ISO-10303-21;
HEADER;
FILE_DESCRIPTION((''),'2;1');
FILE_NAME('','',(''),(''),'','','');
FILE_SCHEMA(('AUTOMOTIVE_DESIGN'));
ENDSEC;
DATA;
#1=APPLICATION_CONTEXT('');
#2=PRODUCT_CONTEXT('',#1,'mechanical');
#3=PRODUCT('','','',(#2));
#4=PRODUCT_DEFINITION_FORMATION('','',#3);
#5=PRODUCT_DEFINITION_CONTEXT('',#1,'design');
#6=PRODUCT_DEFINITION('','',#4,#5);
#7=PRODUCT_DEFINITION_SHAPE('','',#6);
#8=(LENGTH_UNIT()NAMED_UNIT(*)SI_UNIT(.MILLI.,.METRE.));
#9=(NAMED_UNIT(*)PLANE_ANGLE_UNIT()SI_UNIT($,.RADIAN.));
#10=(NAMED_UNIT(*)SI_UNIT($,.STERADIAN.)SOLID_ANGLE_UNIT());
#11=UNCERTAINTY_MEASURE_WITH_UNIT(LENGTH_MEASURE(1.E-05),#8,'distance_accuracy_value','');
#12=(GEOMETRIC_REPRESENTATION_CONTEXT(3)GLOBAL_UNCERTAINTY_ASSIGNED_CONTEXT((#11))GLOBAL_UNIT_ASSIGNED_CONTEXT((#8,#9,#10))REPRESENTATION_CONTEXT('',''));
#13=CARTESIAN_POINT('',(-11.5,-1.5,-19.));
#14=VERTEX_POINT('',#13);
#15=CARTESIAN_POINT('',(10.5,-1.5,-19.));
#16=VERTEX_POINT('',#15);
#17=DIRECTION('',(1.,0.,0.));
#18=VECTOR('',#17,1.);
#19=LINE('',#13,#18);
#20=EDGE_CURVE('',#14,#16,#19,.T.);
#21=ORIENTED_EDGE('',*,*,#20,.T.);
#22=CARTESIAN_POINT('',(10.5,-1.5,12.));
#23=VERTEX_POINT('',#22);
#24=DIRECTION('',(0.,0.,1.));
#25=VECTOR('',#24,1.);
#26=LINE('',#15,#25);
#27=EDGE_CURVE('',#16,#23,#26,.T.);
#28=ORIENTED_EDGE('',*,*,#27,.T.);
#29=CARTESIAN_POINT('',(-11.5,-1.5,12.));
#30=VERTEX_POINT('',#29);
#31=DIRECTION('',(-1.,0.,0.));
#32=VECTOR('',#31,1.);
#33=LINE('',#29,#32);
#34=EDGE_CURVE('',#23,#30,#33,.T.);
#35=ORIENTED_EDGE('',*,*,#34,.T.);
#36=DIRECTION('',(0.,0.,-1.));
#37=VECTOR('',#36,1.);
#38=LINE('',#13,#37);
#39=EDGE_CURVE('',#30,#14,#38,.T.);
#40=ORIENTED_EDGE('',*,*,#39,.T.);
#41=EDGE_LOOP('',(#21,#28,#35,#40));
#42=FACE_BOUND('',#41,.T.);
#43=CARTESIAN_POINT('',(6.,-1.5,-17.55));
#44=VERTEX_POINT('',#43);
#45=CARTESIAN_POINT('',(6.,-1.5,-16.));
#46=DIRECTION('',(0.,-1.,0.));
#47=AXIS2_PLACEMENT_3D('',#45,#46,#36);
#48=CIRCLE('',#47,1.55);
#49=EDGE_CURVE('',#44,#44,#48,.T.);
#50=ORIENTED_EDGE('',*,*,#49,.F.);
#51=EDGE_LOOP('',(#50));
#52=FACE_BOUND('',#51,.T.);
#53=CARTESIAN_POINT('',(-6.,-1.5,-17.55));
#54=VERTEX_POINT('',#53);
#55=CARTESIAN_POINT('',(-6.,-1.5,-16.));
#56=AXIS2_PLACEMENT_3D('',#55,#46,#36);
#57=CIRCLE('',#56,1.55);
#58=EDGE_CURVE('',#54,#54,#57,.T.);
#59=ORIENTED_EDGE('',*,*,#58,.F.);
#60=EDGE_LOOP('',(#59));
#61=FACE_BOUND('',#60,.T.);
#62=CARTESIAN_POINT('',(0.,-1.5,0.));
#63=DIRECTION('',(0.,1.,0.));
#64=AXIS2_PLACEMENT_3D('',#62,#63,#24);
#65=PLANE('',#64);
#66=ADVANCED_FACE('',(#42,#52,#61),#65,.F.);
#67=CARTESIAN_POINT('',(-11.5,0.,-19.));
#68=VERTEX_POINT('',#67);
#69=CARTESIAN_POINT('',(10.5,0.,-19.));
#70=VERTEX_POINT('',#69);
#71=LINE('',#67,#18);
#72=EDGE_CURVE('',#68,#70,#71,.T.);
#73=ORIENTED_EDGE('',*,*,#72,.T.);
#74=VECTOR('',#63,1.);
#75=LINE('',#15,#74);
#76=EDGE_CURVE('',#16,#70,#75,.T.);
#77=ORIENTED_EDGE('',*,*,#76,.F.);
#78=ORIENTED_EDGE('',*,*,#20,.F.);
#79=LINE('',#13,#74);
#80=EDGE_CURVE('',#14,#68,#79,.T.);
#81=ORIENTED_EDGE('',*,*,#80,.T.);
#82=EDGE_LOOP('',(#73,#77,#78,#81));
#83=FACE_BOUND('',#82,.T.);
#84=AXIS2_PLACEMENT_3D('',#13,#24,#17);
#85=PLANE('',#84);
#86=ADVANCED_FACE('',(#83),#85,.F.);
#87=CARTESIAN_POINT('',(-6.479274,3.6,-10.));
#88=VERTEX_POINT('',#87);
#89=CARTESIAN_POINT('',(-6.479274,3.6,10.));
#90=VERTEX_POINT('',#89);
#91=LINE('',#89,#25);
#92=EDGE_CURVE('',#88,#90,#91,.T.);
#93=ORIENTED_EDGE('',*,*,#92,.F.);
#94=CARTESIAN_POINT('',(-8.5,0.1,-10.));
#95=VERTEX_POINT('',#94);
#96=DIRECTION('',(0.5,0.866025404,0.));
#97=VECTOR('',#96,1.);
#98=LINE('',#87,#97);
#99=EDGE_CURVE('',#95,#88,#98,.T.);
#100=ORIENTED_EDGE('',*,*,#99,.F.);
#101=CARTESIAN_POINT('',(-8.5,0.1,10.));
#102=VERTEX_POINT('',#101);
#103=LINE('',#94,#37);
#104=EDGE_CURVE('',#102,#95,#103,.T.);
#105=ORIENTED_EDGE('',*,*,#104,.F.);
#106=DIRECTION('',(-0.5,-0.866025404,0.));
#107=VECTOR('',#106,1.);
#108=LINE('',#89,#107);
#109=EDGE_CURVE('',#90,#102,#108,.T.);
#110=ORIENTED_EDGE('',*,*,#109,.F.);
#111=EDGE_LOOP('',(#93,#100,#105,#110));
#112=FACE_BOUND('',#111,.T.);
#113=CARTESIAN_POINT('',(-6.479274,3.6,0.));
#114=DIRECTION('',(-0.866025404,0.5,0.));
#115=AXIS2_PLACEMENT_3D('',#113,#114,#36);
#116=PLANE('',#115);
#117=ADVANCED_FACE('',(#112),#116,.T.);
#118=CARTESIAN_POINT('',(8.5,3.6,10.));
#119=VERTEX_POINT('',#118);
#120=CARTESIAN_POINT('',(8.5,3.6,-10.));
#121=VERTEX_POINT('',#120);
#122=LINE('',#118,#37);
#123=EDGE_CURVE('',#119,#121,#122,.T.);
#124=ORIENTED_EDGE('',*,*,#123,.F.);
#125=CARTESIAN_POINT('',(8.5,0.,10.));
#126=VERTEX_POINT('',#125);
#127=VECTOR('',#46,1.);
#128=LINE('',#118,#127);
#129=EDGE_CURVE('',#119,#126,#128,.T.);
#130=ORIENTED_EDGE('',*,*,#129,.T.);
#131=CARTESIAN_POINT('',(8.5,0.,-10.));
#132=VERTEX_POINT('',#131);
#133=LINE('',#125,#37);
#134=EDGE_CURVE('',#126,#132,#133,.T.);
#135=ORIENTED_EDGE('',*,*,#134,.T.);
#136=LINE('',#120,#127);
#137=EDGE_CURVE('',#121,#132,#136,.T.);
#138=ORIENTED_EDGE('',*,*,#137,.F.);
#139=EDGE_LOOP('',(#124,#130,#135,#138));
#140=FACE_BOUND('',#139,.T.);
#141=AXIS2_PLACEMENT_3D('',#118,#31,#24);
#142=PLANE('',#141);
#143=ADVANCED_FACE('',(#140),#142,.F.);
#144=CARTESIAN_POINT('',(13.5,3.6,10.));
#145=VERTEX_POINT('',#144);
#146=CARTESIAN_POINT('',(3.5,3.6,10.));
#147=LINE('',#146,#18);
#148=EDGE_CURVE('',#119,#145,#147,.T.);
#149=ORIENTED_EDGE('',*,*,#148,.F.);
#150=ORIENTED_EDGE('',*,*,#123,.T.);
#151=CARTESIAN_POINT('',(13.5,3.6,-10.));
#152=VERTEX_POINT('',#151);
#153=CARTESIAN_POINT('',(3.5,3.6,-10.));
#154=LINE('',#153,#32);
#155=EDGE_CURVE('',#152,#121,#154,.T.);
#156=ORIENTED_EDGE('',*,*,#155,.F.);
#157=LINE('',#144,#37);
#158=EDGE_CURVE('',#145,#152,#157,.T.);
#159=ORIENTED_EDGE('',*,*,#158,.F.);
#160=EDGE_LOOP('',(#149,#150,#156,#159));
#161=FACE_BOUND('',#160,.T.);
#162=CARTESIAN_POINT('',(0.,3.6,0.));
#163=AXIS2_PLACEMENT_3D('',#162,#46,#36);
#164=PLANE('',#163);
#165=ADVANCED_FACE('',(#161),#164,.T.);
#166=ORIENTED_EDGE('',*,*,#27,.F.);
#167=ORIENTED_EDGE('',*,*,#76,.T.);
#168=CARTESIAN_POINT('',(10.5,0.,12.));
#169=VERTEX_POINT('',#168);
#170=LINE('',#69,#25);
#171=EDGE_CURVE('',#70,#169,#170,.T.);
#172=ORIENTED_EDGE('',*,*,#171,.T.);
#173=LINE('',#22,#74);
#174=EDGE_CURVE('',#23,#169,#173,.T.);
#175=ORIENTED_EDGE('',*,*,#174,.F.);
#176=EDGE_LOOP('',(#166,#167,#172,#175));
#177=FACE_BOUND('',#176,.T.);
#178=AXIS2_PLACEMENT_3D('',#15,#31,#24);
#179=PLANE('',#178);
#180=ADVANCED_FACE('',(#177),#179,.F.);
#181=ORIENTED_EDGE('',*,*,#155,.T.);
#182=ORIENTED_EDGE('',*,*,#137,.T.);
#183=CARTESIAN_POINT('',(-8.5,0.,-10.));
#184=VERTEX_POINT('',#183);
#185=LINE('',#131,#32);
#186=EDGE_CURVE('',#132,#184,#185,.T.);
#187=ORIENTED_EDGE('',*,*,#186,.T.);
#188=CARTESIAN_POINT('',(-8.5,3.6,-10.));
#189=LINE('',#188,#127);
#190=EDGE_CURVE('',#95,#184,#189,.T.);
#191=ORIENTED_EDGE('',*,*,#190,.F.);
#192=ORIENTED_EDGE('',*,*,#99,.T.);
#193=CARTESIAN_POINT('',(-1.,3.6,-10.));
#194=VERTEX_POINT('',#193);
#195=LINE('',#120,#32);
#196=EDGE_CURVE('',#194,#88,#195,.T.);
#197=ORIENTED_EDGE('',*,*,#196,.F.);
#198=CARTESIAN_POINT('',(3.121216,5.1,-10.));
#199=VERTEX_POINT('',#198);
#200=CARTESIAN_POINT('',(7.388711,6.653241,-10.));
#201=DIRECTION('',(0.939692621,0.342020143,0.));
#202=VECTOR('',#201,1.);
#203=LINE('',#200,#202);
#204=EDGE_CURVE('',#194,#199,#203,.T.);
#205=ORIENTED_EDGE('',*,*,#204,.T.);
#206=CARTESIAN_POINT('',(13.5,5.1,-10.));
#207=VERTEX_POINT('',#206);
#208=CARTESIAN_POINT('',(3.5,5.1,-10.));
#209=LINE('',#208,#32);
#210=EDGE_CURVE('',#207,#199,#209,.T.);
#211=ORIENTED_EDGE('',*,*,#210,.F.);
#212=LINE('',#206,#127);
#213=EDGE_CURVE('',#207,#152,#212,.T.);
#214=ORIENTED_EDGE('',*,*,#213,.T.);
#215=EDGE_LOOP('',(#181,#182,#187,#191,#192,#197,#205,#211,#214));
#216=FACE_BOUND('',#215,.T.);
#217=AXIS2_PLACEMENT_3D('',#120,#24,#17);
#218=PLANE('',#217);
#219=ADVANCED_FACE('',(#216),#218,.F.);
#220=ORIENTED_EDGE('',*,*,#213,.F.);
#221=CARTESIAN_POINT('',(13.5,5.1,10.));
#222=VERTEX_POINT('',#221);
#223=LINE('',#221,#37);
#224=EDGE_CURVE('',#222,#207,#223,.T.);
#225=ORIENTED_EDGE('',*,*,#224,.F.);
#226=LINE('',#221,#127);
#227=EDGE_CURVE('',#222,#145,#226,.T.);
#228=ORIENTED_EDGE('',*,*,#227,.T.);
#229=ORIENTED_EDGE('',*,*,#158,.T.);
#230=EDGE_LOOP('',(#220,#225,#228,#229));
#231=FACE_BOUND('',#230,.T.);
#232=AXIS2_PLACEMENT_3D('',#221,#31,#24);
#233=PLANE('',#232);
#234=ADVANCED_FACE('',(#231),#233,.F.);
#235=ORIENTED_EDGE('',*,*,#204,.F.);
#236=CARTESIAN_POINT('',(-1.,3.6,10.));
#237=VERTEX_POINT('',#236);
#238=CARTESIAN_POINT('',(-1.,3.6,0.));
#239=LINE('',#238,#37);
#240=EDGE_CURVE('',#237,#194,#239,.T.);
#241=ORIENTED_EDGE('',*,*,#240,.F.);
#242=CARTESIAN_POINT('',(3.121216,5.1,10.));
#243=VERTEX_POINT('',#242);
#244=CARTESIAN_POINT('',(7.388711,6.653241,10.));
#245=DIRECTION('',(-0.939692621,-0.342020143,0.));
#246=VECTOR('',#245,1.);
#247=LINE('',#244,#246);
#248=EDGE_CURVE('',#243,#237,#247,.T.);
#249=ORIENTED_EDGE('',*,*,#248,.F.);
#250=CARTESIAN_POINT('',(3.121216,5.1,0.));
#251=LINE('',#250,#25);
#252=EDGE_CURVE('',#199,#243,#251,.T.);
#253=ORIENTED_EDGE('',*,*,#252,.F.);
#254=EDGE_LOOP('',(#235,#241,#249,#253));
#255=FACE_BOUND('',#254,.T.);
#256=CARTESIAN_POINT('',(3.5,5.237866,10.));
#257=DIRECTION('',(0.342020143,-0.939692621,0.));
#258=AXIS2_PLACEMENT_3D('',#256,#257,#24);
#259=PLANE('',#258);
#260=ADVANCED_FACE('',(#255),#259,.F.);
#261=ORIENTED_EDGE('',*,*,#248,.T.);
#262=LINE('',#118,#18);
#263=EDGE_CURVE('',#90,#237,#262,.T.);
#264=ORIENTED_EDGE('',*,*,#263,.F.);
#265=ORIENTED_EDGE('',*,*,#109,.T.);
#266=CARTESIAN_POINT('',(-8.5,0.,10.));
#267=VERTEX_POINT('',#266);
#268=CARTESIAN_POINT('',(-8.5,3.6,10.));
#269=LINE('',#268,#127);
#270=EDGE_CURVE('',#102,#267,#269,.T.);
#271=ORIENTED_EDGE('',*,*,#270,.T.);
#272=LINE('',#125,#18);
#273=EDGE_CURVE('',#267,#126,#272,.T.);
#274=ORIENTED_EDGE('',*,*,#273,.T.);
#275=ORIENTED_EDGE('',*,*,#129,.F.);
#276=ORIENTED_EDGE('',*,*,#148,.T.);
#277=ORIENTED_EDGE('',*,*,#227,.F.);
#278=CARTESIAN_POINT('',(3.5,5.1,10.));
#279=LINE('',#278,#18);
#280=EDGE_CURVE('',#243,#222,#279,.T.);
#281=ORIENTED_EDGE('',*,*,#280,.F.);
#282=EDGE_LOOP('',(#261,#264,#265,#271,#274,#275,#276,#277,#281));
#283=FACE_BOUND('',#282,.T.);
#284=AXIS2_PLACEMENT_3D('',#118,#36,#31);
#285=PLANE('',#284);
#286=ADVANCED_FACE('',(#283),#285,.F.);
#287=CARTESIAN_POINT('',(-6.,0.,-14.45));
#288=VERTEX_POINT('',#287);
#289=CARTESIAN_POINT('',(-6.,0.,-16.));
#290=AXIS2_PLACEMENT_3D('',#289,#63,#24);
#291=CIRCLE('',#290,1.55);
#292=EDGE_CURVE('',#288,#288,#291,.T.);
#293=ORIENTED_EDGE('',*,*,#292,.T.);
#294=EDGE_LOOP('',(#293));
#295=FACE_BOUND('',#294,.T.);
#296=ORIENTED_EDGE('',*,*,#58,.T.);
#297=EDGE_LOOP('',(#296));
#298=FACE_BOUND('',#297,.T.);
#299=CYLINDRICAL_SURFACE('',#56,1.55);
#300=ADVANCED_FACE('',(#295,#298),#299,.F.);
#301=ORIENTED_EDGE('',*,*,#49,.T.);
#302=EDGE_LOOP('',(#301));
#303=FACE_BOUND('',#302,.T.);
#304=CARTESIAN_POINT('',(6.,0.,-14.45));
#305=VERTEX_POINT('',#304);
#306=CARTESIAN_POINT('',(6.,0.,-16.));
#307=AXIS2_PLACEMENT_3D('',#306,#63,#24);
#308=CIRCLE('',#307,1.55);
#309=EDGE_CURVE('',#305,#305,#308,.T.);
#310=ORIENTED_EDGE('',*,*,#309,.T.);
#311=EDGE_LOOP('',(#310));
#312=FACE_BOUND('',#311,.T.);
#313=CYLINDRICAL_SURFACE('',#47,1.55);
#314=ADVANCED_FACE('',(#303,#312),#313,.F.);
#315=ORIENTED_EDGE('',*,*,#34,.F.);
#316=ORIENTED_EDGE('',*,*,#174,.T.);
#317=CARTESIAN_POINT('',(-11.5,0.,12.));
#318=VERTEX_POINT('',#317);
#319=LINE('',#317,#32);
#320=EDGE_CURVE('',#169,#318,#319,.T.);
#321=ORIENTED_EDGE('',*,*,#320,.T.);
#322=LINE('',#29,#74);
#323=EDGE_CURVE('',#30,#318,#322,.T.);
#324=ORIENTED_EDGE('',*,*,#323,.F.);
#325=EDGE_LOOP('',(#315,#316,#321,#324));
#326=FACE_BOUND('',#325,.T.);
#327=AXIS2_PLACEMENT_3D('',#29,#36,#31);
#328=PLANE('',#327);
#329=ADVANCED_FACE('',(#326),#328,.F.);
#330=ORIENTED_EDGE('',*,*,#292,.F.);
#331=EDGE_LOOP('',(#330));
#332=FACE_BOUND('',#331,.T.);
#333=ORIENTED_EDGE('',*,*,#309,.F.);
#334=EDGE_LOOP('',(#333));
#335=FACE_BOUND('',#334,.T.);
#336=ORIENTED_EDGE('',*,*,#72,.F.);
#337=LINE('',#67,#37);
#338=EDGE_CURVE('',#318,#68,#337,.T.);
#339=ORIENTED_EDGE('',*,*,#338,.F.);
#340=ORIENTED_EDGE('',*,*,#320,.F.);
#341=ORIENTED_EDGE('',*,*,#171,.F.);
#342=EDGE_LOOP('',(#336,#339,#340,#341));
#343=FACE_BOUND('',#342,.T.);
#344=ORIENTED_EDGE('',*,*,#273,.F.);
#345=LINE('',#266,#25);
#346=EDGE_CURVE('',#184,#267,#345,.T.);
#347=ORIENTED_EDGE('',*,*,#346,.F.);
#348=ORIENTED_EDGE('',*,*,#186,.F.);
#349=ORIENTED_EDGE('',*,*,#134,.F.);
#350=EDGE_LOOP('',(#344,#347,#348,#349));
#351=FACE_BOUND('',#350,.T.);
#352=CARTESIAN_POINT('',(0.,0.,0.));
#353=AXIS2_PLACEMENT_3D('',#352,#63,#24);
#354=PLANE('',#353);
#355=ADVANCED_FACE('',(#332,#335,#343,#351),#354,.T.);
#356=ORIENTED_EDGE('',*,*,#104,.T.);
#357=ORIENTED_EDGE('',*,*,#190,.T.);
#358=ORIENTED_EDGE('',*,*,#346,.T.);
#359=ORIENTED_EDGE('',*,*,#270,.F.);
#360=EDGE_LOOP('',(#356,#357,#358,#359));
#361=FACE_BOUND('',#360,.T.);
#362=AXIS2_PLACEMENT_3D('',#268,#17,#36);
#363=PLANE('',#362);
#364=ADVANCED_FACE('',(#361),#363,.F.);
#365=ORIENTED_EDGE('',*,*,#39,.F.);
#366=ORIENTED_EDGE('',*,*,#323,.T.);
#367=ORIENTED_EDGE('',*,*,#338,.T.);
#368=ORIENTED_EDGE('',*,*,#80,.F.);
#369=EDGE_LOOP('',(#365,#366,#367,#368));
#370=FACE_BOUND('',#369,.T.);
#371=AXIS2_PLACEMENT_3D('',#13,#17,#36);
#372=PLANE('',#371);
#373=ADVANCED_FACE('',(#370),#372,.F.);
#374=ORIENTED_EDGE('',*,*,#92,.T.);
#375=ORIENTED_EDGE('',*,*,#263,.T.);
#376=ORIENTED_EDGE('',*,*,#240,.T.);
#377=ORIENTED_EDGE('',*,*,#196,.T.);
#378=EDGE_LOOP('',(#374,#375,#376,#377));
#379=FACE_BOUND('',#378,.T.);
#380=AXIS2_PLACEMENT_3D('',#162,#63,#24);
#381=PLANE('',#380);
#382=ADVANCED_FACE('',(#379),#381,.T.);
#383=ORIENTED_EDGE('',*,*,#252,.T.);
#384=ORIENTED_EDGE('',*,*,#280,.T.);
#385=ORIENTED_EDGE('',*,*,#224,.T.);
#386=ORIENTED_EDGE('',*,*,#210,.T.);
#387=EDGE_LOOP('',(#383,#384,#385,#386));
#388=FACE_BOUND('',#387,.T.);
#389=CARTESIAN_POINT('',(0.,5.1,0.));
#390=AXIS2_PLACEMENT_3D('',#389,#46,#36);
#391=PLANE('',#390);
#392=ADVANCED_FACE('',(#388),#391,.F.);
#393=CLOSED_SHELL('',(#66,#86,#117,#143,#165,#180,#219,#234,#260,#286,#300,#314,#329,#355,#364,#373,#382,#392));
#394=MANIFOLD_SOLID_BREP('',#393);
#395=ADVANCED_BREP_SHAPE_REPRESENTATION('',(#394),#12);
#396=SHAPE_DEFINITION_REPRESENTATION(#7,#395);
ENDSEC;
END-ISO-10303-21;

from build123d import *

# Parameters (mm, degrees)
SKIZZE2_W                        = 17
SKIZZE2_H                        = 20
AUFSATZ_LINEAR_AUSTRAGEN1_DEPTH  = 3.6
SKIZZE3_W                        = 22
SKIZZE3_H                        = 31
AUFSATZ_LINEAR_AUSTRAGEN2_DEPTH  = 1.5
F_3_1_3_1_DURCHMESSER_BOHRUNG1_D = 3.1
SKIZZE10_W                       = 10
SKIZZE10_H                       = 20
AUFSATZ_LINEAR_AUSTRAGEN3_DEPTH  = 1.5
FASE4_SIZE                       = 4.5
FASE4_SIZE_2                     = 1.637866054
FASE5_SIZE                       = 3.5
FASE5_SIZE2                      = 2.020725942


with BuildPart() as part:
    # Skizze2 → Aufsatz-Linear austragen1 (new body)
    with BuildSketch(Plane(origin=(0, 0, 0), x_dir=(1, 0, 0), z_dir=(0, 1, 0))):
        Rectangle(SKIZZE2_W, SKIZZE2_H)
    extrude(amount=AUFSATZ_LINEAR_AUSTRAGEN1_DEPTH)

    # Skizze3 → Aufsatz-Linear austragen2 (add)
    with BuildSketch(Plane(origin=(0, 0, 0), x_dir=(-1, 0, 0), z_dir=(0, -1, 0))):
        with Locations((0.5, 3.5)):
            Rectangle(SKIZZE3_W, SKIZZE3_H)
    extrude(amount=AUFSATZ_LINEAR_AUSTRAGEN2_DEPTH)

    # Ø3.1 (3.1) Durchmesser Bohrung1 (through all)
    with Locations(Plane(origin=(0, -1.5, 0), x_dir=(-1, 0, 0), z_dir=(0, -1, 0))):
        with Locations((6, 16), (-6, 16)):
            Hole(F_3_1_3_1_DURCHMESSER_BOHRUNG1_D / 2)

    # Skizze10 → Aufsatz-Linear austragen3 (add)
    with BuildSketch(Plane(origin=(0, 3.6, 0), x_dir=(1, 0, 0), z_dir=(0, 1, 0))):
        with Locations((8.5, 0)):
            Rectangle(SKIZZE10_W, SKIZZE10_H)
    extrude(amount=AUFSATZ_LINEAR_AUSTRAGEN3_DEPTH)

    # Fase4
    # the kernel refuses this chamfer: 4.5, 1.637866054 mm, written as the material it adds along each edge
    with BuildSketch(Plane(origin=(3.5, 3.6, -10), x_dir=(-0.9999130865277315, -0.01318405819864591, 0), z_dir=(0, 0, 1))) as fase4_piece_1_section:
        Polygon((FASE4_SIZE * 0.999913086528, -FASE4_SIZE * 0.0131840581986), (-FASE4_SIZE_2 * 0.0131840582002, -FASE4_SIZE_2 * 0.999913086649), (0, 0), align=None)
    fase4_piece_1 = extrude(amount=20, mode=Mode.PRIVATE)
    fase4_piece_1 = split(fase4_piece_1, bisect_by=Plane(origin=(1.935786974, 5.1, 0), z_dir=(0, -1, 0)), keep=Keep.TOP, mode=Mode.PRIVATE)
    add(fase4_piece_1)

    # Fase5
    fase5_edges = [part.edges().sort_by_distance(p)[0] for p in [
        (-8.5, 3.6, 0),
    ]]
    fase5_side = [part.faces().sort_by_distance(p)[0] for p in [
        (-8.5, 1.8, 0),
    ]]
    chamfer(fase5_edges, length=FASE5_SIZE, length2=FASE5_SIZE2, reference=fase5_side[0])


solid = part.part
